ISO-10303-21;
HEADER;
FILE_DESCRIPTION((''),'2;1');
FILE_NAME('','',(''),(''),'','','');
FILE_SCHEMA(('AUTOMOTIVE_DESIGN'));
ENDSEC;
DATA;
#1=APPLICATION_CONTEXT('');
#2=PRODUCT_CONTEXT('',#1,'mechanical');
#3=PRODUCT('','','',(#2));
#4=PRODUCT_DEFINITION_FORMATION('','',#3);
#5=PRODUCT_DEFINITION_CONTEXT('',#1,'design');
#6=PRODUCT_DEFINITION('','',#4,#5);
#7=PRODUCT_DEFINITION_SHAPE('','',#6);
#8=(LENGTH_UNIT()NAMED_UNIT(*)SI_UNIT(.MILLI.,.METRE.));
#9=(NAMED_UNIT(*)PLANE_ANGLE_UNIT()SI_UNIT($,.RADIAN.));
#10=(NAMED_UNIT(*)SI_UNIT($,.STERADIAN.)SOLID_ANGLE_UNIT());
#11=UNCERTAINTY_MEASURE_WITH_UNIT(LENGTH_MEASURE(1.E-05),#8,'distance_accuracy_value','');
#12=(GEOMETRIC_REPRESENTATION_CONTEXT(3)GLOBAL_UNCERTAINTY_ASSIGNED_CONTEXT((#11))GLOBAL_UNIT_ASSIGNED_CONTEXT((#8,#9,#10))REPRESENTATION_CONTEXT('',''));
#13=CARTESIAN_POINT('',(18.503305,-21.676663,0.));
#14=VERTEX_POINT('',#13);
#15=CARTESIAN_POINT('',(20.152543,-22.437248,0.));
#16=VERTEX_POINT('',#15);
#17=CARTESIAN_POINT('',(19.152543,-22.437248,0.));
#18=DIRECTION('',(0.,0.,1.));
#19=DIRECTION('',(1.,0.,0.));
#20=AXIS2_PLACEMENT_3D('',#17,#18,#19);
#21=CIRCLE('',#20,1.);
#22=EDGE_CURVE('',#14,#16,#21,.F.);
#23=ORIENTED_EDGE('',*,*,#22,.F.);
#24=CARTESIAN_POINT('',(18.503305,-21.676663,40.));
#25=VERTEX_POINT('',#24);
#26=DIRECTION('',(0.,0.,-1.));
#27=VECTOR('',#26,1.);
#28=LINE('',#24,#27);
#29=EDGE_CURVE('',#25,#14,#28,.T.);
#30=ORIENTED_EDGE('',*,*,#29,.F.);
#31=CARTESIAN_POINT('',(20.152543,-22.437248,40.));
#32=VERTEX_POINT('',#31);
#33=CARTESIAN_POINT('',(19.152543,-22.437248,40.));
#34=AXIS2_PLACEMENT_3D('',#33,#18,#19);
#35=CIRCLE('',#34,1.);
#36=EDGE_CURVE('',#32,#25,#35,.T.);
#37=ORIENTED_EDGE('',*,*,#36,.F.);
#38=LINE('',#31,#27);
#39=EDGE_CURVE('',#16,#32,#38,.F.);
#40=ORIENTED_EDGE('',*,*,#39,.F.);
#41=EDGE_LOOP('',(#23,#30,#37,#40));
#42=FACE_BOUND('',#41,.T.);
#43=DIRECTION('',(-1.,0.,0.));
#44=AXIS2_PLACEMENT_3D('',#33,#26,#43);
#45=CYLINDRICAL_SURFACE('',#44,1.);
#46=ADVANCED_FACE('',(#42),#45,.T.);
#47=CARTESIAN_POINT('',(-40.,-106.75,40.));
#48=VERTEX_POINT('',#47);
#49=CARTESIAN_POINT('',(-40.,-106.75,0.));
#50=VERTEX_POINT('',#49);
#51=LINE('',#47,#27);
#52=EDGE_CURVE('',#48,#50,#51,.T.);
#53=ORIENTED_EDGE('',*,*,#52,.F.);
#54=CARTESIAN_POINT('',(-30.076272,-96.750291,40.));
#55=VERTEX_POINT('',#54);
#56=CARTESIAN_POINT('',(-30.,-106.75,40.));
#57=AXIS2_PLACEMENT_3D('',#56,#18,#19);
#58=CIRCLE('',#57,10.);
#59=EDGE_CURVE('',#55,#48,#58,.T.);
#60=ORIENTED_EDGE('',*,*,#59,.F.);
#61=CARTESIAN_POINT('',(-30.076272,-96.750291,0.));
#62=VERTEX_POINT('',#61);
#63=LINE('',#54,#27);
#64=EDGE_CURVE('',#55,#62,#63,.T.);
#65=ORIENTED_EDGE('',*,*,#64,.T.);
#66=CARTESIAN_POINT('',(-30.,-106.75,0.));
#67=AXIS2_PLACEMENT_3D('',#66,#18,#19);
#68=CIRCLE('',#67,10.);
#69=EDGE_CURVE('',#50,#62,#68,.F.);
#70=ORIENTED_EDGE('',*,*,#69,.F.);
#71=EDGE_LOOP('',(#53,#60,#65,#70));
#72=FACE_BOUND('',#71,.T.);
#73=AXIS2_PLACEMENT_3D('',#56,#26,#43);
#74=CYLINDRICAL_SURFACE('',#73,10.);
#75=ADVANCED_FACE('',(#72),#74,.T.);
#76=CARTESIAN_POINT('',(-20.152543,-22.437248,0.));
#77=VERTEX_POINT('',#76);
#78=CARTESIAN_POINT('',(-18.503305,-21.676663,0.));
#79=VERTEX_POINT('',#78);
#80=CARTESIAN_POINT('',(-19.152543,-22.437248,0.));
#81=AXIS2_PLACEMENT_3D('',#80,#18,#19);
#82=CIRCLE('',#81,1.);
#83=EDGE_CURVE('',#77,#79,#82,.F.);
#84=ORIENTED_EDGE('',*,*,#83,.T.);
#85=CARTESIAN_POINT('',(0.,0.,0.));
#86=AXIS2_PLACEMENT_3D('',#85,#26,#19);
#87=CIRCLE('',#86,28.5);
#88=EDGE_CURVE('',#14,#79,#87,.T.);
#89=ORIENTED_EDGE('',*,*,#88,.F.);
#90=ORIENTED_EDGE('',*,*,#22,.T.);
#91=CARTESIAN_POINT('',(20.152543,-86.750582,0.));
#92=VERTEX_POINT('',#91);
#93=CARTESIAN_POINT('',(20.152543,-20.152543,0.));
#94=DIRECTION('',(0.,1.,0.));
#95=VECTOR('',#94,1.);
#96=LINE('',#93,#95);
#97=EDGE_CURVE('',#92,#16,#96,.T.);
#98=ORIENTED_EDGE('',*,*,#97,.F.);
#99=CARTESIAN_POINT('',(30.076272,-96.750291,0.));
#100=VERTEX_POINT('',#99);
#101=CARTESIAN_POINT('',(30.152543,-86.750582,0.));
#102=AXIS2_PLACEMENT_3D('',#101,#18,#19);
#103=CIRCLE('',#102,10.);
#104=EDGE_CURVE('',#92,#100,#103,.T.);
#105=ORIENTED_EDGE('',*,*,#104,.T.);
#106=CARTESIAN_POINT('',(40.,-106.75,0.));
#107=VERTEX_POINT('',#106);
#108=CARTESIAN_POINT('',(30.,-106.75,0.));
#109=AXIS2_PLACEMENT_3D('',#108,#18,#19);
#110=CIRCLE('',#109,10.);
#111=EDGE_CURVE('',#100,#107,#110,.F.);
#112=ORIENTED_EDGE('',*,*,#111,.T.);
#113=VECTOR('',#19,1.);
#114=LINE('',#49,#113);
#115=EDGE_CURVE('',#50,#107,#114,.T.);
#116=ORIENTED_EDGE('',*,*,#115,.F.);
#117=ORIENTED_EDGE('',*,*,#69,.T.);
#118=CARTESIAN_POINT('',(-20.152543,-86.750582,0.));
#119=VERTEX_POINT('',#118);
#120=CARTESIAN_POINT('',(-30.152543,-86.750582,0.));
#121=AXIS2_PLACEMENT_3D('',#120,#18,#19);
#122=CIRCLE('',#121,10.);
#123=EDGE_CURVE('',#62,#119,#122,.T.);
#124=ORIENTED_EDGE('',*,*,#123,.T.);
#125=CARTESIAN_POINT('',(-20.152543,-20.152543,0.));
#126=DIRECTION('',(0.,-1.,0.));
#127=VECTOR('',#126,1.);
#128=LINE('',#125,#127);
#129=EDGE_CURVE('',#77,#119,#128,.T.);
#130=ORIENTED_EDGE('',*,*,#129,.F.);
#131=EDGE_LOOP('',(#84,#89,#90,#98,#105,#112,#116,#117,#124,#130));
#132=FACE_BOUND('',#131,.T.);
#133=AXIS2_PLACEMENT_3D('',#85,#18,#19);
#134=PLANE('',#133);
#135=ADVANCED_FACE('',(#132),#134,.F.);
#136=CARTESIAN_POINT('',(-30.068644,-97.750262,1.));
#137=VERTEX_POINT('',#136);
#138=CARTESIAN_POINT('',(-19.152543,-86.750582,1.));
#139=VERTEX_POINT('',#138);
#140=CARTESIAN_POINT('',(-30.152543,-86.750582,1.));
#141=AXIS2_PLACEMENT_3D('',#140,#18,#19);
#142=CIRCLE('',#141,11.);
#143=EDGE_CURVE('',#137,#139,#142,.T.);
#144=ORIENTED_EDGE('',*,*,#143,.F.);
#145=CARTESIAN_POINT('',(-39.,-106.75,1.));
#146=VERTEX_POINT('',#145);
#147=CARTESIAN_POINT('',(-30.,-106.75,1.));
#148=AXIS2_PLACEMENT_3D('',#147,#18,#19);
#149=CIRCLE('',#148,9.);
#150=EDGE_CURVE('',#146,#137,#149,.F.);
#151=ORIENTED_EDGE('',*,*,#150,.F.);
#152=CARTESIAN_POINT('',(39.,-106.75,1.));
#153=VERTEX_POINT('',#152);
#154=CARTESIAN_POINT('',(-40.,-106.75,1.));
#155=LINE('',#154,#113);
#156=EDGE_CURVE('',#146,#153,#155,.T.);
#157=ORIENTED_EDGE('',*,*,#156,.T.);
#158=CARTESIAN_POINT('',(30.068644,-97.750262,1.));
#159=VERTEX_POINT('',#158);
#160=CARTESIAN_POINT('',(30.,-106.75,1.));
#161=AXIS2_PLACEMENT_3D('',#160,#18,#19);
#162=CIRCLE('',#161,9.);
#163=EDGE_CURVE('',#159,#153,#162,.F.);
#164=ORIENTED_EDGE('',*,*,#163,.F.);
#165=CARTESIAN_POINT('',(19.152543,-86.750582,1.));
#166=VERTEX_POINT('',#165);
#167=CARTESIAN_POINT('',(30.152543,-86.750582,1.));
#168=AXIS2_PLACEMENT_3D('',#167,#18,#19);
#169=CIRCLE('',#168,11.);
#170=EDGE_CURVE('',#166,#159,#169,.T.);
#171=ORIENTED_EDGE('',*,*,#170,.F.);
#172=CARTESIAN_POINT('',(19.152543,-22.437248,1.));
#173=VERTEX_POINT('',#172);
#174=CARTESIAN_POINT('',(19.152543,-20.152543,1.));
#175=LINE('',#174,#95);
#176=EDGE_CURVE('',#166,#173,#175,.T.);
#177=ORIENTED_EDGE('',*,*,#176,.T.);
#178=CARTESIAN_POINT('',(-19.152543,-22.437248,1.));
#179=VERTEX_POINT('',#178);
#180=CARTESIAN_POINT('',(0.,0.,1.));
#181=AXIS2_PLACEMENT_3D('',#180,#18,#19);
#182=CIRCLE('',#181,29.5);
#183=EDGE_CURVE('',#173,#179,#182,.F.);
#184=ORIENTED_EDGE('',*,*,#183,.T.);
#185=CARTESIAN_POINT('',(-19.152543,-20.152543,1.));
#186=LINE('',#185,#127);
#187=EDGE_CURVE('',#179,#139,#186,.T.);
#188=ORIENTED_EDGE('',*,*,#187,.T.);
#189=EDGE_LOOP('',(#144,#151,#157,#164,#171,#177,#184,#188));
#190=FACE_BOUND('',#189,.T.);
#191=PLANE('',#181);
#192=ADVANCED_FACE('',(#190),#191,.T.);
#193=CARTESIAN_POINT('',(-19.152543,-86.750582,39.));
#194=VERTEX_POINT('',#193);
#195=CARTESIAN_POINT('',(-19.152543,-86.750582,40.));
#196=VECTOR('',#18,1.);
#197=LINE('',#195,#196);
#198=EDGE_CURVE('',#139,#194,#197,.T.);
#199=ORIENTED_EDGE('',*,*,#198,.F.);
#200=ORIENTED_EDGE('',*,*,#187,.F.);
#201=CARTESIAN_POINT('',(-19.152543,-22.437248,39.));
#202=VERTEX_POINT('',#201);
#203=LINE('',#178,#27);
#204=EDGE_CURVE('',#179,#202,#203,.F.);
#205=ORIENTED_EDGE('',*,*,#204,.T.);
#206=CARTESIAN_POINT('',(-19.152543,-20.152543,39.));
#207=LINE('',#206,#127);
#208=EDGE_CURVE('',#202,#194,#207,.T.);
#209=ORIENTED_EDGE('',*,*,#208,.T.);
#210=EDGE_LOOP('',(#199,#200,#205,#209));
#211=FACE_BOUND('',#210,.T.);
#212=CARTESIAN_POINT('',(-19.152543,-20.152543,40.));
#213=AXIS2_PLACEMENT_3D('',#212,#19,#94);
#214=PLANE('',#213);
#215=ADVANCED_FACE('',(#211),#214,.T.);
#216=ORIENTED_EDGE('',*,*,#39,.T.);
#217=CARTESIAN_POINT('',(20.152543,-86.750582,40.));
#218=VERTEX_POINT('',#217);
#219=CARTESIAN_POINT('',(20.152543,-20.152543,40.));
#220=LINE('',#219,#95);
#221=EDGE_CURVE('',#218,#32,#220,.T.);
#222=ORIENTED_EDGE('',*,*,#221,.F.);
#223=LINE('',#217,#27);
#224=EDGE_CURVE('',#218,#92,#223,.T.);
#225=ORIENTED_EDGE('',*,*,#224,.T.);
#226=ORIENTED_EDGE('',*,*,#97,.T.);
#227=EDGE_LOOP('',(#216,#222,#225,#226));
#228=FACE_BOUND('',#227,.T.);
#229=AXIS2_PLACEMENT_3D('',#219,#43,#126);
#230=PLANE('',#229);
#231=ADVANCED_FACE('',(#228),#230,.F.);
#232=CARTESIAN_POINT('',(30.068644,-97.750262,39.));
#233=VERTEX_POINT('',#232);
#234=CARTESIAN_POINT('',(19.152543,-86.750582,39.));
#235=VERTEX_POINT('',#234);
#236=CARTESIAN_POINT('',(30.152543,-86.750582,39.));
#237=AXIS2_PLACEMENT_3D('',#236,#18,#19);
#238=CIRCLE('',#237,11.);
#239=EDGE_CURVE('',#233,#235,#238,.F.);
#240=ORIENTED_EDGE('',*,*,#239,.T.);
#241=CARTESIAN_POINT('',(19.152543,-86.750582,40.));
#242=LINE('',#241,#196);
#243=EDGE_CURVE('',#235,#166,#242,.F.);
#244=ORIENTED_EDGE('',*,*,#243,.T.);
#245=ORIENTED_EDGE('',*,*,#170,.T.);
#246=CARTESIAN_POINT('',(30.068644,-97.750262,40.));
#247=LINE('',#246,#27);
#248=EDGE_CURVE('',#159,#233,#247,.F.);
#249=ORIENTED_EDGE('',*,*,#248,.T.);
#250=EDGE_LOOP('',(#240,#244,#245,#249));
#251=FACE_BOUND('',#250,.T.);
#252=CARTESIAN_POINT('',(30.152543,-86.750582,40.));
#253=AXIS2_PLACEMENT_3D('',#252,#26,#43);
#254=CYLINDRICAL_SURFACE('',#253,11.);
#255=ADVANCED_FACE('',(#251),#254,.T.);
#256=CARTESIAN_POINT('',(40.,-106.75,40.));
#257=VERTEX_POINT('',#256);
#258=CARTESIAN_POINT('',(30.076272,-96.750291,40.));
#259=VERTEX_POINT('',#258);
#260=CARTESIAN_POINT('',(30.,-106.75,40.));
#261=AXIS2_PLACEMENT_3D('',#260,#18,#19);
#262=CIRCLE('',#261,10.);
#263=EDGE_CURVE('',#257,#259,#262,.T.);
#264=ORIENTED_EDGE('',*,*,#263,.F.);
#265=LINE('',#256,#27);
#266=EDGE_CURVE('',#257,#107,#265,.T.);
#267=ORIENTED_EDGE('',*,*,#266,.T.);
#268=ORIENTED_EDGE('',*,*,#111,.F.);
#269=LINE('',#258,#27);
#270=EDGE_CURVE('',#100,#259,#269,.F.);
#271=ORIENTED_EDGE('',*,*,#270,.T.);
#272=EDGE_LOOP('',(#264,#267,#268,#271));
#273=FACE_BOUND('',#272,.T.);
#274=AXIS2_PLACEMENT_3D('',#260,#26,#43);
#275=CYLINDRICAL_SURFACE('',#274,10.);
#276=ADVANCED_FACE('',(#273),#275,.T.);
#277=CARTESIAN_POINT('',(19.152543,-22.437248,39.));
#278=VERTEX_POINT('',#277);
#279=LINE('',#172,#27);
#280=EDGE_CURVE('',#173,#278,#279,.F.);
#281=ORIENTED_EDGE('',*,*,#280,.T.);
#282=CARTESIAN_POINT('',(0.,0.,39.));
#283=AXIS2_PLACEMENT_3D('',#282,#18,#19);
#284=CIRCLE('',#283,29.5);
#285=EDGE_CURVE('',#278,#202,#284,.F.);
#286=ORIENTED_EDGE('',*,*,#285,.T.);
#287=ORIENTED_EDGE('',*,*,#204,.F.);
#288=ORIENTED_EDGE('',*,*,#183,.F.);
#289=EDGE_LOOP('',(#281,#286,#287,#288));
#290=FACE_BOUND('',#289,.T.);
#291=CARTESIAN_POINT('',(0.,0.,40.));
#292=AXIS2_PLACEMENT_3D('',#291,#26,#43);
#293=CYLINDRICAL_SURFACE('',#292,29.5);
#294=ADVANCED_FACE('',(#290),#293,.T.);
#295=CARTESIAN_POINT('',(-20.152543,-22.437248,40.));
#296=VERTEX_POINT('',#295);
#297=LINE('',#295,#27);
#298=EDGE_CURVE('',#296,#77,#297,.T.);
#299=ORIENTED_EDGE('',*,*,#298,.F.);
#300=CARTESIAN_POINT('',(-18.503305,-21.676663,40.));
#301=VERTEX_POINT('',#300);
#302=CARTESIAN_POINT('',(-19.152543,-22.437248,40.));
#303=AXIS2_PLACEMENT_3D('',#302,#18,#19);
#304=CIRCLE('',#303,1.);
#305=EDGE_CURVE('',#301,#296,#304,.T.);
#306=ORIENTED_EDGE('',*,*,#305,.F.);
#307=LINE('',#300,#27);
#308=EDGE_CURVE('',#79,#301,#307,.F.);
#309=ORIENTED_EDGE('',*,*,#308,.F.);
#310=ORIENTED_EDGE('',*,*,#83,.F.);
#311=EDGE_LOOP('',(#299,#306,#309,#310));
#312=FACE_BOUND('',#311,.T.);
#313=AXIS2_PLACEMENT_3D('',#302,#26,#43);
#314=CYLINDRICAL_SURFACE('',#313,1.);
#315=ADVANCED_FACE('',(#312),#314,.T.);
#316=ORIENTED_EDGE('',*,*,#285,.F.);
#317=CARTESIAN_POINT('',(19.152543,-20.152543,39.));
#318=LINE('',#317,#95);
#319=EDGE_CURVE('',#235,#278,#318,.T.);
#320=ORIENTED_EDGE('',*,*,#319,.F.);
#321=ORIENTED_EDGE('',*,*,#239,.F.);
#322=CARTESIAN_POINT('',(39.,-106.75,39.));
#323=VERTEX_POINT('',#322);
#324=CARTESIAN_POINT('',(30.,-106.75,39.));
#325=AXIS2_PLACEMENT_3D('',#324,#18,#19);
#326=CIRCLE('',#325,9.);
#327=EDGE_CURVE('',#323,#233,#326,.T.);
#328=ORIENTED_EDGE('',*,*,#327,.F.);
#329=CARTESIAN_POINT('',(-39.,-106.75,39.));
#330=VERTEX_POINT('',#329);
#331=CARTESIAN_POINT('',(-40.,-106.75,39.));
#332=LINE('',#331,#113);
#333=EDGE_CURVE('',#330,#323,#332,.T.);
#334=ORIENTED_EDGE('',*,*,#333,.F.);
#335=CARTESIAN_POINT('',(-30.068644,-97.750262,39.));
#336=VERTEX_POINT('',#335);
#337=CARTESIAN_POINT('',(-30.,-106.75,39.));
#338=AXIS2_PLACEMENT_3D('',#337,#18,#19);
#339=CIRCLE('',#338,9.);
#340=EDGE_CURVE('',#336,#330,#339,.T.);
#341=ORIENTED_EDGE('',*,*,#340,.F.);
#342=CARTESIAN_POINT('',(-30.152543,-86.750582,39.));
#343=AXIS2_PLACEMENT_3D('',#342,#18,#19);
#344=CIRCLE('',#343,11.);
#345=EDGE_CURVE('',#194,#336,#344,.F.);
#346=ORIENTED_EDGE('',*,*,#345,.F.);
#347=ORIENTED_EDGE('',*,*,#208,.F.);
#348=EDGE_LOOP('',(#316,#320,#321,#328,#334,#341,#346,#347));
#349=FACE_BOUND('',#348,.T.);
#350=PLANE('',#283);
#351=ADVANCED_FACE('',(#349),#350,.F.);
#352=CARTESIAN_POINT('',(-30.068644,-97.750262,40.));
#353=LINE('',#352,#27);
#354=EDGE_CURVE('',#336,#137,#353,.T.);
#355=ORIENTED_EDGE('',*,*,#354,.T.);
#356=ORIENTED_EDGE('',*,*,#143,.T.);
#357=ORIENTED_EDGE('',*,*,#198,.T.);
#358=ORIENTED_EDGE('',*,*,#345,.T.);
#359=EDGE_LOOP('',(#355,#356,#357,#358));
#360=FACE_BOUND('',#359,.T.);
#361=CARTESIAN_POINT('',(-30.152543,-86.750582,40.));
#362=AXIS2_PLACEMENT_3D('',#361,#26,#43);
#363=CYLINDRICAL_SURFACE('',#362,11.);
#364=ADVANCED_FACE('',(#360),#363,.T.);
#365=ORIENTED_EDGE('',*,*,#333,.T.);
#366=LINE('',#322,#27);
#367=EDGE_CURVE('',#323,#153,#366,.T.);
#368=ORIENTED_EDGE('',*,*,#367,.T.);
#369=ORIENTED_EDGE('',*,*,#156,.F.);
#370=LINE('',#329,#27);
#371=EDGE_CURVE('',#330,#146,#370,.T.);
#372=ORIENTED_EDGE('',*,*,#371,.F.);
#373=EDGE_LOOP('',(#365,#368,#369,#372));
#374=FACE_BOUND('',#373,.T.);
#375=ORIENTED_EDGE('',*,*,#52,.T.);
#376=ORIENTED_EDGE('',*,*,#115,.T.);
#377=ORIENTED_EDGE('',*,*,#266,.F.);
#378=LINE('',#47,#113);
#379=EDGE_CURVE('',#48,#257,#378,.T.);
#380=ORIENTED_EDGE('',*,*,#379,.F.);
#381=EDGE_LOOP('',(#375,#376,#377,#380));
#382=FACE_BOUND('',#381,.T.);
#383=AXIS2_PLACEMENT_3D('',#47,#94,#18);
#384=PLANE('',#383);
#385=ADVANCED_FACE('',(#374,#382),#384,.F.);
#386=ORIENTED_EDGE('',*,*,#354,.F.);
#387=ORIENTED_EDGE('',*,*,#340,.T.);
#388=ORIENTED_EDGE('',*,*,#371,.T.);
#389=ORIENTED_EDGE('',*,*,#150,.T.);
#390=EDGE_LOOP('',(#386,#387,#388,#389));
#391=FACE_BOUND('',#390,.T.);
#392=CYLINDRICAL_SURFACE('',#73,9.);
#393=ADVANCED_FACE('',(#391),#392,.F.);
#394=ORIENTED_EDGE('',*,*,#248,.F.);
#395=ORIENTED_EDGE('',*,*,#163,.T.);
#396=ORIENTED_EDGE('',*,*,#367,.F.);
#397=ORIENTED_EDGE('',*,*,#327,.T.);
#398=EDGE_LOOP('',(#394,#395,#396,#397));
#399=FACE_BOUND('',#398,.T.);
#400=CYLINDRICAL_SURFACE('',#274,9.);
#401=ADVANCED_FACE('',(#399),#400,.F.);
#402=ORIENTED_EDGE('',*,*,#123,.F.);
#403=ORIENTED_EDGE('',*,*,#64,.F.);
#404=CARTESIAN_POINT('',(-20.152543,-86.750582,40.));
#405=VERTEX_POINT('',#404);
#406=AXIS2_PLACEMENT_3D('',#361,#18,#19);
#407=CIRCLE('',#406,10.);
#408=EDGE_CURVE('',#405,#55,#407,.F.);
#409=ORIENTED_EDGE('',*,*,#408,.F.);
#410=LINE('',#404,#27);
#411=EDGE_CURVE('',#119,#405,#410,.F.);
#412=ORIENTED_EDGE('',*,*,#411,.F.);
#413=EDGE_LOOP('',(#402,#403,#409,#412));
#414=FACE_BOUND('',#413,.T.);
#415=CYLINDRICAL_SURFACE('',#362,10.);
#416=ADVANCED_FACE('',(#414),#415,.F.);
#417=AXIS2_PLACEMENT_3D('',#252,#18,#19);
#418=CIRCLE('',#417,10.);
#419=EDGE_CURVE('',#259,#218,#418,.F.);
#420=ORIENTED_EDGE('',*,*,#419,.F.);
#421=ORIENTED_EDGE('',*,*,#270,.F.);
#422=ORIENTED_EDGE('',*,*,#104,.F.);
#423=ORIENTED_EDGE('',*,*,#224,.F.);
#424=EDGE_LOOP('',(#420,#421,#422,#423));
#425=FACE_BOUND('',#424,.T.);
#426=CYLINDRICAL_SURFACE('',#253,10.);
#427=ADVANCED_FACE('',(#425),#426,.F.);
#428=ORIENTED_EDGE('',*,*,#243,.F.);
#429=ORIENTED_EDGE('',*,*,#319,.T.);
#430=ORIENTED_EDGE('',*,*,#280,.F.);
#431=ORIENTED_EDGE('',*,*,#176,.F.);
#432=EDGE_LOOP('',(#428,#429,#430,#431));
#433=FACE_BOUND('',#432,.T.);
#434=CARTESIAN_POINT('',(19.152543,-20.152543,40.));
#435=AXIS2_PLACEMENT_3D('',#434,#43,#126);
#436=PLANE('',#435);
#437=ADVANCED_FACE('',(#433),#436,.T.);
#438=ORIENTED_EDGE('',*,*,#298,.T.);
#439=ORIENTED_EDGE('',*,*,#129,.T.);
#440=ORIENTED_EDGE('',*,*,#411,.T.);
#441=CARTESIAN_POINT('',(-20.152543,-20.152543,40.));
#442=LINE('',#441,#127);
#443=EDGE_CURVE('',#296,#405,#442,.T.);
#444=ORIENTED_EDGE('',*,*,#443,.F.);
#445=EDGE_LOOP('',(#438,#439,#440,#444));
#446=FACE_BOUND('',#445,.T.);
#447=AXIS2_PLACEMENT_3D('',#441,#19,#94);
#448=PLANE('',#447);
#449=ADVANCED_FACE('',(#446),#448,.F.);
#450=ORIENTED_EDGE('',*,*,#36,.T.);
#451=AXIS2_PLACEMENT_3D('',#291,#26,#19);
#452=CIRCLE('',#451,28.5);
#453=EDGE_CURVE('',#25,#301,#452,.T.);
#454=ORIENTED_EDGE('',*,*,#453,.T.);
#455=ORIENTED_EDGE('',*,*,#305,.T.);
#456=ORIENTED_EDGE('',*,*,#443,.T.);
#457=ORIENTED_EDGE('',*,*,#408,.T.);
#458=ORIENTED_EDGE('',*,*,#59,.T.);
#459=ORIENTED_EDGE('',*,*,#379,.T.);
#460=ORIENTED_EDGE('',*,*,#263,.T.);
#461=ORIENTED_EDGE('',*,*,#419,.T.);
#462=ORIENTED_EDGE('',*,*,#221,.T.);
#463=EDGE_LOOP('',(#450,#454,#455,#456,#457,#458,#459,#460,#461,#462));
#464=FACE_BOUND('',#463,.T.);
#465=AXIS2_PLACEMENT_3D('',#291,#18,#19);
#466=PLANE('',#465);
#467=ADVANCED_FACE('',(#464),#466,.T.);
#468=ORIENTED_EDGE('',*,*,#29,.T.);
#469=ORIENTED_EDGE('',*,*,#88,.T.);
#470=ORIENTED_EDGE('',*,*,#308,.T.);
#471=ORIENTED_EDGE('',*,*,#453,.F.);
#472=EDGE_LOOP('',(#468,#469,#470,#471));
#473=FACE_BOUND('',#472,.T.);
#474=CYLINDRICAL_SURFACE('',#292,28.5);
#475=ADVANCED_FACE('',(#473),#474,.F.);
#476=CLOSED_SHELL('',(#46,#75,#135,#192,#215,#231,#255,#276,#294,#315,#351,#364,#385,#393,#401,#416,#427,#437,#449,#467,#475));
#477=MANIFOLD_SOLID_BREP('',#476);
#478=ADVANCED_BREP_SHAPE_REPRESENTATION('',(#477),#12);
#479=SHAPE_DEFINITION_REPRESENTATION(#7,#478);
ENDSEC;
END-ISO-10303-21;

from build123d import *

# Parameters (mm, degrees)
EXTRUDE_1_DEPTH = 40
FILLET_1_R      = 1
FILLET_2_R      = 10
FILLET_3_R      = 10
SHELL_START     = 1
SHELL_1_DEPTH   = 38


# Read off the part's stored shape, not the designer's step: 抽壳1
with BuildPart() as part:
    # 草图1 → 凸台-拉伸1 (new body)
    with BuildSketch(Plane.XY):
        with BuildLine():
            Line((-40, -106.75), (40, -106.75))
            Line((40, -106.75), (40, -96.75))
            Line((40, -96.75), (20.152543264, -96.75))
            Line((20.152543264, -96.75), (20.152543264, -20.152543264))
            ThreePointArc((20.152543264, -20.152543264), (0, -28.5), (-20.152543264, -20.152543264))
            Line((-20.152543264, -20.152543264), (-20.152543264, -96.75))
            Line((-20.152543264, -96.75), (-40, -96.75))
            Line((-40, -96.75), (-40, -106.75))
        make_face()
    extrude(amount=EXTRUDE_1_DEPTH)

    # 圆角1
    fillet_1_edges = [part.edges().sort_by_distance(p)[0] for p in [
        (-20.152543264, -20.152543264, 20),
        (20.152543264, -20.152543264, 20),
    ]]
    fillet(fillet_1_edges, radius=FILLET_1_R)

    # 圆角2
    fillet_2_edges = [part.edges().sort_by_distance(p)[0] for p in [
        (40, -96.75, 20),
        (-40, -96.75, 20),
    ]]
    fillet(fillet_2_edges, radius=FILLET_2_R - 0.0001)  # a hair under: the kernel refuses the full size

    # 圆角3
    fillet_3_edges = [part.edges().sort_by_distance(p)[0] for p in [
        (20.152543264, -96.75, 20),
        (-20.152543264, -96.75, 20),
    ]]
    fillet(fillet_3_edges, radius=FILLET_3_R)

    # 抽壳1 outline → 抽壳1 (cut)
    with BuildSketch(Plane.XY.offset(SHELL_START)):
        with BuildLine():
            Line((19.152543264, -86.750581745), (19.152543264, -22.437247749))
            ThreePointArc((19.152543264, -22.437247749), (0, -29.5), (-19.152543264, -22.437247749))
            Line((-19.152543264, -22.437247749), (-19.152543264, -86.750581745))
            ThreePointArc((-19.152543264, -86.750581745), (-22.344762313, -94.499036857), (-30.068644469, -97.750261785))
            ThreePointArc((-30.068644469, -97.750261785), (-36.388184414, -100.410354908), (-39, -106.75))
            Line((-39, -106.75), (39, -106.75))
            ThreePointArc((39, -106.75), (36.388184414, -100.410354908), (30.068644469, -97.750261785))
            ThreePointArc((30.068644469, -97.750261785), (22.344762313, -94.499036857), (19.152543264, -86.750581745))
        make_face()
    extrude(amount=SHELL_1_DEPTH, mode=Mode.SUBTRACT)


solid = part.part
